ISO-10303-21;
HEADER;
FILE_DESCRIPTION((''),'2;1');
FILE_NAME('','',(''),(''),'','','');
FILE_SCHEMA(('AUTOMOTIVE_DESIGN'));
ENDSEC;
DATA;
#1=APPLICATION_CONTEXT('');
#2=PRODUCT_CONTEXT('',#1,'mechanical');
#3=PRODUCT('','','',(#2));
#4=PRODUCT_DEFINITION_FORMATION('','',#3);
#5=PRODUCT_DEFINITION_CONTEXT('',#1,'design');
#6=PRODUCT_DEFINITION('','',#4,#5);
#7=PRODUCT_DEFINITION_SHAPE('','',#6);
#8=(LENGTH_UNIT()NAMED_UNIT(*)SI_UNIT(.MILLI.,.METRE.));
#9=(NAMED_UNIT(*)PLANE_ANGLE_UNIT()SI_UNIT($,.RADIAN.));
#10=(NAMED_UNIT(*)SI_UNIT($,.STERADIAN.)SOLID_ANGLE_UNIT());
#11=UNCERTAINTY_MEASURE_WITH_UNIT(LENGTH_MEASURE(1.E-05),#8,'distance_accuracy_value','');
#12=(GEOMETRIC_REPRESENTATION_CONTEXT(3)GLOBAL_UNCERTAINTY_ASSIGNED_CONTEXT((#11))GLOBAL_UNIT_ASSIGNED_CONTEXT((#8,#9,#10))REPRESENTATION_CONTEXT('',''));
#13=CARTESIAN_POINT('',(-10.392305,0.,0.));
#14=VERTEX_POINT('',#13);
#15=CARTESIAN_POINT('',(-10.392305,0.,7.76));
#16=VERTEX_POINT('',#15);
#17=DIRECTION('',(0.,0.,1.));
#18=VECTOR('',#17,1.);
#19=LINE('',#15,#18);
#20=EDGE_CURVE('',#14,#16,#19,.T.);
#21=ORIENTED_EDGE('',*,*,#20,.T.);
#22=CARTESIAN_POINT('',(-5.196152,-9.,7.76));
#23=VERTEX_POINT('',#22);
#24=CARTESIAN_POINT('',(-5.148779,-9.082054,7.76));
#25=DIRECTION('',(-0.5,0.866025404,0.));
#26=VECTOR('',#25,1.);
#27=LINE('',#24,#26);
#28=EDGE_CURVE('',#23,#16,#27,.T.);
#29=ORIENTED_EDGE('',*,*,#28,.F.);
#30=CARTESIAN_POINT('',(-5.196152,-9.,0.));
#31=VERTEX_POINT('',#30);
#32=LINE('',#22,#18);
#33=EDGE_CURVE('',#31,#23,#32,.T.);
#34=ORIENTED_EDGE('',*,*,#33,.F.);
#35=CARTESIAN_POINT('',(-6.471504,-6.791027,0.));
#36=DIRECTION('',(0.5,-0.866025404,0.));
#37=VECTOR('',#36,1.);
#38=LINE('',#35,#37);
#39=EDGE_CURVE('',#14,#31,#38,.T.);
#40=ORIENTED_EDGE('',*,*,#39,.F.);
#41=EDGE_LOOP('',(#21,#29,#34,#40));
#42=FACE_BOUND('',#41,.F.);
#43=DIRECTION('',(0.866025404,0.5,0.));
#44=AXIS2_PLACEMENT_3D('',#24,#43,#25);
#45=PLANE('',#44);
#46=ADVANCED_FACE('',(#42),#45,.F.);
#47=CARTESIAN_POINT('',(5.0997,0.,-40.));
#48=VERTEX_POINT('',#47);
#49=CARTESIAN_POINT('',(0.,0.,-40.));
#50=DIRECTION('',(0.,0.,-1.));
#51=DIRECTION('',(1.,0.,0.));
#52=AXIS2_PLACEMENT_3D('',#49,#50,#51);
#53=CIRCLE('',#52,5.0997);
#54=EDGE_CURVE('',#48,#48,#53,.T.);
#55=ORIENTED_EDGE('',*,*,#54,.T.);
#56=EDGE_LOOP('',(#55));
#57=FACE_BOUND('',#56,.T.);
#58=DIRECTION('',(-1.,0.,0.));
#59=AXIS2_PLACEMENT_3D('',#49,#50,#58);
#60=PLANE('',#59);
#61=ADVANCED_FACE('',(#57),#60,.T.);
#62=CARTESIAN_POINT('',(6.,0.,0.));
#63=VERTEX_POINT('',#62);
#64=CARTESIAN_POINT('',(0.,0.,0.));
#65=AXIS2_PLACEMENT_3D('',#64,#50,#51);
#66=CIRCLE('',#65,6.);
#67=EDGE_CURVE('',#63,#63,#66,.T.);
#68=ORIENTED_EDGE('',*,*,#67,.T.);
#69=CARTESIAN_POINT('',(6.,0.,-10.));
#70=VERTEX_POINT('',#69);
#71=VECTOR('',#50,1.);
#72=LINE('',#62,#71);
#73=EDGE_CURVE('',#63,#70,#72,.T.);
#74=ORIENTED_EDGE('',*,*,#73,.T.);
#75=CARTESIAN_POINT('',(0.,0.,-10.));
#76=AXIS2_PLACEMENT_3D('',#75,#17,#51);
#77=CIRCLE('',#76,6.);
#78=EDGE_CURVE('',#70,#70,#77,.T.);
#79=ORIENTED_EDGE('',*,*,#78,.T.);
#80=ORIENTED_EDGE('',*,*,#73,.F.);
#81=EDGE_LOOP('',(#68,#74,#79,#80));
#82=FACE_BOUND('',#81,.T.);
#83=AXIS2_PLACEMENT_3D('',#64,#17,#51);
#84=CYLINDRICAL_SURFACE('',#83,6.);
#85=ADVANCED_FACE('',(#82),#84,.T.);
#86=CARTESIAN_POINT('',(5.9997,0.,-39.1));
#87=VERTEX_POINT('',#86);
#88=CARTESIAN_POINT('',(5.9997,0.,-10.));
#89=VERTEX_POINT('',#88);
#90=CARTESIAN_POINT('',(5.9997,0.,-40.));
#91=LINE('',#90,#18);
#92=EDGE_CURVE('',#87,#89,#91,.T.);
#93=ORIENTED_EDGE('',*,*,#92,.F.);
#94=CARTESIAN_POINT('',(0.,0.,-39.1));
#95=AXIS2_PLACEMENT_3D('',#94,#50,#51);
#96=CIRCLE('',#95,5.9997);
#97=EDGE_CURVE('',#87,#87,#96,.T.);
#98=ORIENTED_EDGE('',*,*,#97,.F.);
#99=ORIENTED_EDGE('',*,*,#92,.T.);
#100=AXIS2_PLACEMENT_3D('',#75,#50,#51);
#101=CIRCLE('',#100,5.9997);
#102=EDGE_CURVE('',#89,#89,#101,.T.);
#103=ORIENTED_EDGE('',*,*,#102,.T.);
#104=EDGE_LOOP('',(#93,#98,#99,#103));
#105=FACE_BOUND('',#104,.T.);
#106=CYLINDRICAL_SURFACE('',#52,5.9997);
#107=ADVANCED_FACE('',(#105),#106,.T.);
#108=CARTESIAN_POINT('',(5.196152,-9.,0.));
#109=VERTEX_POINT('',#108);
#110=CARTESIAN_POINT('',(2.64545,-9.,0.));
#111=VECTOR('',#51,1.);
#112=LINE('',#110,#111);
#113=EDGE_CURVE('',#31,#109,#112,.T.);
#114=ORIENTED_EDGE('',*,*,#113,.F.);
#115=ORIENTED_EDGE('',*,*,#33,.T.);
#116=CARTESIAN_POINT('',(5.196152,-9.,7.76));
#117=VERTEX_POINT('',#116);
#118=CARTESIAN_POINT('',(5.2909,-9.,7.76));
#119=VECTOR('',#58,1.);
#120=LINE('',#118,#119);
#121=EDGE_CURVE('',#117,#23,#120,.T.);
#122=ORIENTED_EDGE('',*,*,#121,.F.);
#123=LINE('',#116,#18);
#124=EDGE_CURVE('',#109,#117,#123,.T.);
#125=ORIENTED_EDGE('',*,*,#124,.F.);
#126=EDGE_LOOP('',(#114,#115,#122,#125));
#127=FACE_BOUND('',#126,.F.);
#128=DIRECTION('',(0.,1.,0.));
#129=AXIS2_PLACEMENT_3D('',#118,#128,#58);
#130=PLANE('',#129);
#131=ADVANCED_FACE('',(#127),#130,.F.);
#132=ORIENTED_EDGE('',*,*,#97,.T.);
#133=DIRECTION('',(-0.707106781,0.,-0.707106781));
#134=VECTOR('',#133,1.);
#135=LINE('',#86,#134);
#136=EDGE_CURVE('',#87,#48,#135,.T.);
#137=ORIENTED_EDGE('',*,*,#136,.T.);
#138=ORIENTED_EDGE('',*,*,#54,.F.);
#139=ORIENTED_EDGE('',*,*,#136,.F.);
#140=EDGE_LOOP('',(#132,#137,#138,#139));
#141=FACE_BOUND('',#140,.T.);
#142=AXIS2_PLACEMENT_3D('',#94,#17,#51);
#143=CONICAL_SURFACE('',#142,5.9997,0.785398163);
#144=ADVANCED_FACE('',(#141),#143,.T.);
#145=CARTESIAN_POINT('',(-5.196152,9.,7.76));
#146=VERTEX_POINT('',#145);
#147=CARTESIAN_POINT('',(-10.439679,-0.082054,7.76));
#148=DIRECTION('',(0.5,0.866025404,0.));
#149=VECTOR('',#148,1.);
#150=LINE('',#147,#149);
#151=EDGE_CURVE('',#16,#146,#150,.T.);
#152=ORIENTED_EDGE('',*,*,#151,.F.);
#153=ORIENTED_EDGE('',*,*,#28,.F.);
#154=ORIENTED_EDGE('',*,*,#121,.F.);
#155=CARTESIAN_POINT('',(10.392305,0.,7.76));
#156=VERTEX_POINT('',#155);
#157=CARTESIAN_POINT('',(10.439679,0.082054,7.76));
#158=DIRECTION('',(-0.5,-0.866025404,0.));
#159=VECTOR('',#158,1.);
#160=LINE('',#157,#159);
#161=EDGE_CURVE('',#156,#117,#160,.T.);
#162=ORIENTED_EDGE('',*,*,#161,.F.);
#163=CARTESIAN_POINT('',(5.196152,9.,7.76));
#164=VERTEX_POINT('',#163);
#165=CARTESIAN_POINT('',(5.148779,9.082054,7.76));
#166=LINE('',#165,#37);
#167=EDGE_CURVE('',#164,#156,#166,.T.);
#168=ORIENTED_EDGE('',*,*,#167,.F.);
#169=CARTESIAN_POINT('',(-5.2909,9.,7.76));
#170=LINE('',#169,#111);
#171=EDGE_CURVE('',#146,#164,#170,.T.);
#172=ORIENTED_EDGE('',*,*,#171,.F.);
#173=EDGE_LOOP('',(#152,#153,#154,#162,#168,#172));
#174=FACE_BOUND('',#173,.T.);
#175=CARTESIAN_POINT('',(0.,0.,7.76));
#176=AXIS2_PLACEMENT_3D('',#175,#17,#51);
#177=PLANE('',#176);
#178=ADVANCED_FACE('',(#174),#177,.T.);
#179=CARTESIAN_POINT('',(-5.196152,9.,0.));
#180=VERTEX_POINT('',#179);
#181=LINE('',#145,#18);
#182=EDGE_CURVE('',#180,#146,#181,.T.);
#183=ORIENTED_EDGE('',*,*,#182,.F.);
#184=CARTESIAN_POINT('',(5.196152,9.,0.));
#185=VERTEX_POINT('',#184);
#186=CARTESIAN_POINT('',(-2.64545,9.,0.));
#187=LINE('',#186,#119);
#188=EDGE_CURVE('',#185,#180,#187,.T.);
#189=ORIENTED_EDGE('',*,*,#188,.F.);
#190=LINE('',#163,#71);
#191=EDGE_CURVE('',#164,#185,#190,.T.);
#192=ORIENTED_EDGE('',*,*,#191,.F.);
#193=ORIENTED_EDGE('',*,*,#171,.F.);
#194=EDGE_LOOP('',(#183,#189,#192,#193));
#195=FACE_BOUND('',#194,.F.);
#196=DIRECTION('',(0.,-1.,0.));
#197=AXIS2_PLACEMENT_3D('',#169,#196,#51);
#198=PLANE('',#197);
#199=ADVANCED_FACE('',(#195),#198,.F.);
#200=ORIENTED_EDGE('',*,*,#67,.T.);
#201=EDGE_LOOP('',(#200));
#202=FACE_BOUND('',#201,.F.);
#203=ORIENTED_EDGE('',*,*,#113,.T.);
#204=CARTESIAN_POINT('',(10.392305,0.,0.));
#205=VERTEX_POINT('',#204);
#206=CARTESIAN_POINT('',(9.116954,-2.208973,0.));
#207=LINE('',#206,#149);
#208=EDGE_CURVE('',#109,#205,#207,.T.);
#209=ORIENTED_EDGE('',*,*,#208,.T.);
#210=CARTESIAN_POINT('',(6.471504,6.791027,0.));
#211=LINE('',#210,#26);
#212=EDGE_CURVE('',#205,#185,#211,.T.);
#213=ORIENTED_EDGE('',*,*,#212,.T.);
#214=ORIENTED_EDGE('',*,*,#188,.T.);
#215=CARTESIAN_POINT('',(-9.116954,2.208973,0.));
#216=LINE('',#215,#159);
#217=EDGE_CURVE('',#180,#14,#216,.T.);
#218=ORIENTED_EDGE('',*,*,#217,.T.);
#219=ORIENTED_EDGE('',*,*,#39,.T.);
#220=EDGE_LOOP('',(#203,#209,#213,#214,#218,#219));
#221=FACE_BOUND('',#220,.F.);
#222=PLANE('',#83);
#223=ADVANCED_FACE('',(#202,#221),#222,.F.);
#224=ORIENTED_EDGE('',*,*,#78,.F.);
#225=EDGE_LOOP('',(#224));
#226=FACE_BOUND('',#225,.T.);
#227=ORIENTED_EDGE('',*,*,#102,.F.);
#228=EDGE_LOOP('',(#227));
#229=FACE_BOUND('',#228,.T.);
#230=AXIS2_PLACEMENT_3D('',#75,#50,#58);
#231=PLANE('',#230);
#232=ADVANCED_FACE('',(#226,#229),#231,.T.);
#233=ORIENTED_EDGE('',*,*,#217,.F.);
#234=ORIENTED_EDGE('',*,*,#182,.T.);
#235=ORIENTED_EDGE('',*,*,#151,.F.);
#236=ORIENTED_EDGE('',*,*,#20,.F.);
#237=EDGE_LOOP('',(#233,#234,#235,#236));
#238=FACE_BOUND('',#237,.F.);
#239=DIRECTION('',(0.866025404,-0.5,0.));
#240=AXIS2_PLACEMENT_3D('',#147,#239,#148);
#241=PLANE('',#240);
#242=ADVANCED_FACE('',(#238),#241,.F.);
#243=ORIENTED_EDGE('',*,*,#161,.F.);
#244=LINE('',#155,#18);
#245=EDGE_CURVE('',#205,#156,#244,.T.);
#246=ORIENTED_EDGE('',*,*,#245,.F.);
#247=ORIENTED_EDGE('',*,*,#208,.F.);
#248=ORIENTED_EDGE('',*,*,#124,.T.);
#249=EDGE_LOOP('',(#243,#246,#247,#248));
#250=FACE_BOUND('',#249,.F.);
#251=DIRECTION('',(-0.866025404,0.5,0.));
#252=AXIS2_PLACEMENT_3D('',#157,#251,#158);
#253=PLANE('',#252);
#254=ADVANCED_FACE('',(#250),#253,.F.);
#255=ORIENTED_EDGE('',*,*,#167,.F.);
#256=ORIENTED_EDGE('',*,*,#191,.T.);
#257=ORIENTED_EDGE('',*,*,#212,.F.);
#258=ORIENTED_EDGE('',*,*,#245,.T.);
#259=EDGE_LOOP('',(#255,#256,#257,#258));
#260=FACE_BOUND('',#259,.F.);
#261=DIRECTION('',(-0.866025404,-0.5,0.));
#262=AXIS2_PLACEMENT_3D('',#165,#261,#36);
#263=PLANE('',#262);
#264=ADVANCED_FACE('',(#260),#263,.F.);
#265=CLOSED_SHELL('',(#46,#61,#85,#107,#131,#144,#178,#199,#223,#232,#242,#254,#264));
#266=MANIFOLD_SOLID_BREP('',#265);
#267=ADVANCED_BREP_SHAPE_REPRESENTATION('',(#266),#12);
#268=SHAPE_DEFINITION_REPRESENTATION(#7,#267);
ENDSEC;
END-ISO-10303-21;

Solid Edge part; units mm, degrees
sketch "Sketch1" plane through (0, 0, 0) normal (0, 0, 1) x (1, 0, 0)
  circle A0 centre (0, 0) radius 10.44
  dimension "D1" = 20.88
extrude "Protrusion1" add sketch "Sketch1" along normal blind 7.76
sketch "Sketch2" plane through (0, 0, 0) normal (0, 0, -1) x (1, 0, 0)
  circle A0 centre (0, 0) radius 6
extrude "Protrusion2" add sketch "Sketch2" along normal blind 40
sketch "Sketch3" plane through (0, 0, -40) normal (0, 0, -1) x (1, 0, 0)
  circle A0 centre (0, 0) radius 5.9997
extrude "Cutout1" cut sketch "Sketch3" against normal blind 30 flip side to cut
chamfer "Chamfer_1" distance 0.9 angle 45 1 edges at (-5.9997, 0, -40)
sketch "Sketch4" plane through (0, 0, 7.76) normal (0, 0, 1) x (1, 0, 0)
  line L0 (-5.2909, 9) -> (5.2909, 9)
  dimension "D1" = 18
extrude "Cutout2" cut sketch "Sketch4" against normal up to next material side at (0, 9.05, 7.76)
pattern_circular "Pattern1" count 6 over 360 about axis through (0, 0, 7.76) along (0, 0, 1) of "Cutout2"
properties part number "117618"
